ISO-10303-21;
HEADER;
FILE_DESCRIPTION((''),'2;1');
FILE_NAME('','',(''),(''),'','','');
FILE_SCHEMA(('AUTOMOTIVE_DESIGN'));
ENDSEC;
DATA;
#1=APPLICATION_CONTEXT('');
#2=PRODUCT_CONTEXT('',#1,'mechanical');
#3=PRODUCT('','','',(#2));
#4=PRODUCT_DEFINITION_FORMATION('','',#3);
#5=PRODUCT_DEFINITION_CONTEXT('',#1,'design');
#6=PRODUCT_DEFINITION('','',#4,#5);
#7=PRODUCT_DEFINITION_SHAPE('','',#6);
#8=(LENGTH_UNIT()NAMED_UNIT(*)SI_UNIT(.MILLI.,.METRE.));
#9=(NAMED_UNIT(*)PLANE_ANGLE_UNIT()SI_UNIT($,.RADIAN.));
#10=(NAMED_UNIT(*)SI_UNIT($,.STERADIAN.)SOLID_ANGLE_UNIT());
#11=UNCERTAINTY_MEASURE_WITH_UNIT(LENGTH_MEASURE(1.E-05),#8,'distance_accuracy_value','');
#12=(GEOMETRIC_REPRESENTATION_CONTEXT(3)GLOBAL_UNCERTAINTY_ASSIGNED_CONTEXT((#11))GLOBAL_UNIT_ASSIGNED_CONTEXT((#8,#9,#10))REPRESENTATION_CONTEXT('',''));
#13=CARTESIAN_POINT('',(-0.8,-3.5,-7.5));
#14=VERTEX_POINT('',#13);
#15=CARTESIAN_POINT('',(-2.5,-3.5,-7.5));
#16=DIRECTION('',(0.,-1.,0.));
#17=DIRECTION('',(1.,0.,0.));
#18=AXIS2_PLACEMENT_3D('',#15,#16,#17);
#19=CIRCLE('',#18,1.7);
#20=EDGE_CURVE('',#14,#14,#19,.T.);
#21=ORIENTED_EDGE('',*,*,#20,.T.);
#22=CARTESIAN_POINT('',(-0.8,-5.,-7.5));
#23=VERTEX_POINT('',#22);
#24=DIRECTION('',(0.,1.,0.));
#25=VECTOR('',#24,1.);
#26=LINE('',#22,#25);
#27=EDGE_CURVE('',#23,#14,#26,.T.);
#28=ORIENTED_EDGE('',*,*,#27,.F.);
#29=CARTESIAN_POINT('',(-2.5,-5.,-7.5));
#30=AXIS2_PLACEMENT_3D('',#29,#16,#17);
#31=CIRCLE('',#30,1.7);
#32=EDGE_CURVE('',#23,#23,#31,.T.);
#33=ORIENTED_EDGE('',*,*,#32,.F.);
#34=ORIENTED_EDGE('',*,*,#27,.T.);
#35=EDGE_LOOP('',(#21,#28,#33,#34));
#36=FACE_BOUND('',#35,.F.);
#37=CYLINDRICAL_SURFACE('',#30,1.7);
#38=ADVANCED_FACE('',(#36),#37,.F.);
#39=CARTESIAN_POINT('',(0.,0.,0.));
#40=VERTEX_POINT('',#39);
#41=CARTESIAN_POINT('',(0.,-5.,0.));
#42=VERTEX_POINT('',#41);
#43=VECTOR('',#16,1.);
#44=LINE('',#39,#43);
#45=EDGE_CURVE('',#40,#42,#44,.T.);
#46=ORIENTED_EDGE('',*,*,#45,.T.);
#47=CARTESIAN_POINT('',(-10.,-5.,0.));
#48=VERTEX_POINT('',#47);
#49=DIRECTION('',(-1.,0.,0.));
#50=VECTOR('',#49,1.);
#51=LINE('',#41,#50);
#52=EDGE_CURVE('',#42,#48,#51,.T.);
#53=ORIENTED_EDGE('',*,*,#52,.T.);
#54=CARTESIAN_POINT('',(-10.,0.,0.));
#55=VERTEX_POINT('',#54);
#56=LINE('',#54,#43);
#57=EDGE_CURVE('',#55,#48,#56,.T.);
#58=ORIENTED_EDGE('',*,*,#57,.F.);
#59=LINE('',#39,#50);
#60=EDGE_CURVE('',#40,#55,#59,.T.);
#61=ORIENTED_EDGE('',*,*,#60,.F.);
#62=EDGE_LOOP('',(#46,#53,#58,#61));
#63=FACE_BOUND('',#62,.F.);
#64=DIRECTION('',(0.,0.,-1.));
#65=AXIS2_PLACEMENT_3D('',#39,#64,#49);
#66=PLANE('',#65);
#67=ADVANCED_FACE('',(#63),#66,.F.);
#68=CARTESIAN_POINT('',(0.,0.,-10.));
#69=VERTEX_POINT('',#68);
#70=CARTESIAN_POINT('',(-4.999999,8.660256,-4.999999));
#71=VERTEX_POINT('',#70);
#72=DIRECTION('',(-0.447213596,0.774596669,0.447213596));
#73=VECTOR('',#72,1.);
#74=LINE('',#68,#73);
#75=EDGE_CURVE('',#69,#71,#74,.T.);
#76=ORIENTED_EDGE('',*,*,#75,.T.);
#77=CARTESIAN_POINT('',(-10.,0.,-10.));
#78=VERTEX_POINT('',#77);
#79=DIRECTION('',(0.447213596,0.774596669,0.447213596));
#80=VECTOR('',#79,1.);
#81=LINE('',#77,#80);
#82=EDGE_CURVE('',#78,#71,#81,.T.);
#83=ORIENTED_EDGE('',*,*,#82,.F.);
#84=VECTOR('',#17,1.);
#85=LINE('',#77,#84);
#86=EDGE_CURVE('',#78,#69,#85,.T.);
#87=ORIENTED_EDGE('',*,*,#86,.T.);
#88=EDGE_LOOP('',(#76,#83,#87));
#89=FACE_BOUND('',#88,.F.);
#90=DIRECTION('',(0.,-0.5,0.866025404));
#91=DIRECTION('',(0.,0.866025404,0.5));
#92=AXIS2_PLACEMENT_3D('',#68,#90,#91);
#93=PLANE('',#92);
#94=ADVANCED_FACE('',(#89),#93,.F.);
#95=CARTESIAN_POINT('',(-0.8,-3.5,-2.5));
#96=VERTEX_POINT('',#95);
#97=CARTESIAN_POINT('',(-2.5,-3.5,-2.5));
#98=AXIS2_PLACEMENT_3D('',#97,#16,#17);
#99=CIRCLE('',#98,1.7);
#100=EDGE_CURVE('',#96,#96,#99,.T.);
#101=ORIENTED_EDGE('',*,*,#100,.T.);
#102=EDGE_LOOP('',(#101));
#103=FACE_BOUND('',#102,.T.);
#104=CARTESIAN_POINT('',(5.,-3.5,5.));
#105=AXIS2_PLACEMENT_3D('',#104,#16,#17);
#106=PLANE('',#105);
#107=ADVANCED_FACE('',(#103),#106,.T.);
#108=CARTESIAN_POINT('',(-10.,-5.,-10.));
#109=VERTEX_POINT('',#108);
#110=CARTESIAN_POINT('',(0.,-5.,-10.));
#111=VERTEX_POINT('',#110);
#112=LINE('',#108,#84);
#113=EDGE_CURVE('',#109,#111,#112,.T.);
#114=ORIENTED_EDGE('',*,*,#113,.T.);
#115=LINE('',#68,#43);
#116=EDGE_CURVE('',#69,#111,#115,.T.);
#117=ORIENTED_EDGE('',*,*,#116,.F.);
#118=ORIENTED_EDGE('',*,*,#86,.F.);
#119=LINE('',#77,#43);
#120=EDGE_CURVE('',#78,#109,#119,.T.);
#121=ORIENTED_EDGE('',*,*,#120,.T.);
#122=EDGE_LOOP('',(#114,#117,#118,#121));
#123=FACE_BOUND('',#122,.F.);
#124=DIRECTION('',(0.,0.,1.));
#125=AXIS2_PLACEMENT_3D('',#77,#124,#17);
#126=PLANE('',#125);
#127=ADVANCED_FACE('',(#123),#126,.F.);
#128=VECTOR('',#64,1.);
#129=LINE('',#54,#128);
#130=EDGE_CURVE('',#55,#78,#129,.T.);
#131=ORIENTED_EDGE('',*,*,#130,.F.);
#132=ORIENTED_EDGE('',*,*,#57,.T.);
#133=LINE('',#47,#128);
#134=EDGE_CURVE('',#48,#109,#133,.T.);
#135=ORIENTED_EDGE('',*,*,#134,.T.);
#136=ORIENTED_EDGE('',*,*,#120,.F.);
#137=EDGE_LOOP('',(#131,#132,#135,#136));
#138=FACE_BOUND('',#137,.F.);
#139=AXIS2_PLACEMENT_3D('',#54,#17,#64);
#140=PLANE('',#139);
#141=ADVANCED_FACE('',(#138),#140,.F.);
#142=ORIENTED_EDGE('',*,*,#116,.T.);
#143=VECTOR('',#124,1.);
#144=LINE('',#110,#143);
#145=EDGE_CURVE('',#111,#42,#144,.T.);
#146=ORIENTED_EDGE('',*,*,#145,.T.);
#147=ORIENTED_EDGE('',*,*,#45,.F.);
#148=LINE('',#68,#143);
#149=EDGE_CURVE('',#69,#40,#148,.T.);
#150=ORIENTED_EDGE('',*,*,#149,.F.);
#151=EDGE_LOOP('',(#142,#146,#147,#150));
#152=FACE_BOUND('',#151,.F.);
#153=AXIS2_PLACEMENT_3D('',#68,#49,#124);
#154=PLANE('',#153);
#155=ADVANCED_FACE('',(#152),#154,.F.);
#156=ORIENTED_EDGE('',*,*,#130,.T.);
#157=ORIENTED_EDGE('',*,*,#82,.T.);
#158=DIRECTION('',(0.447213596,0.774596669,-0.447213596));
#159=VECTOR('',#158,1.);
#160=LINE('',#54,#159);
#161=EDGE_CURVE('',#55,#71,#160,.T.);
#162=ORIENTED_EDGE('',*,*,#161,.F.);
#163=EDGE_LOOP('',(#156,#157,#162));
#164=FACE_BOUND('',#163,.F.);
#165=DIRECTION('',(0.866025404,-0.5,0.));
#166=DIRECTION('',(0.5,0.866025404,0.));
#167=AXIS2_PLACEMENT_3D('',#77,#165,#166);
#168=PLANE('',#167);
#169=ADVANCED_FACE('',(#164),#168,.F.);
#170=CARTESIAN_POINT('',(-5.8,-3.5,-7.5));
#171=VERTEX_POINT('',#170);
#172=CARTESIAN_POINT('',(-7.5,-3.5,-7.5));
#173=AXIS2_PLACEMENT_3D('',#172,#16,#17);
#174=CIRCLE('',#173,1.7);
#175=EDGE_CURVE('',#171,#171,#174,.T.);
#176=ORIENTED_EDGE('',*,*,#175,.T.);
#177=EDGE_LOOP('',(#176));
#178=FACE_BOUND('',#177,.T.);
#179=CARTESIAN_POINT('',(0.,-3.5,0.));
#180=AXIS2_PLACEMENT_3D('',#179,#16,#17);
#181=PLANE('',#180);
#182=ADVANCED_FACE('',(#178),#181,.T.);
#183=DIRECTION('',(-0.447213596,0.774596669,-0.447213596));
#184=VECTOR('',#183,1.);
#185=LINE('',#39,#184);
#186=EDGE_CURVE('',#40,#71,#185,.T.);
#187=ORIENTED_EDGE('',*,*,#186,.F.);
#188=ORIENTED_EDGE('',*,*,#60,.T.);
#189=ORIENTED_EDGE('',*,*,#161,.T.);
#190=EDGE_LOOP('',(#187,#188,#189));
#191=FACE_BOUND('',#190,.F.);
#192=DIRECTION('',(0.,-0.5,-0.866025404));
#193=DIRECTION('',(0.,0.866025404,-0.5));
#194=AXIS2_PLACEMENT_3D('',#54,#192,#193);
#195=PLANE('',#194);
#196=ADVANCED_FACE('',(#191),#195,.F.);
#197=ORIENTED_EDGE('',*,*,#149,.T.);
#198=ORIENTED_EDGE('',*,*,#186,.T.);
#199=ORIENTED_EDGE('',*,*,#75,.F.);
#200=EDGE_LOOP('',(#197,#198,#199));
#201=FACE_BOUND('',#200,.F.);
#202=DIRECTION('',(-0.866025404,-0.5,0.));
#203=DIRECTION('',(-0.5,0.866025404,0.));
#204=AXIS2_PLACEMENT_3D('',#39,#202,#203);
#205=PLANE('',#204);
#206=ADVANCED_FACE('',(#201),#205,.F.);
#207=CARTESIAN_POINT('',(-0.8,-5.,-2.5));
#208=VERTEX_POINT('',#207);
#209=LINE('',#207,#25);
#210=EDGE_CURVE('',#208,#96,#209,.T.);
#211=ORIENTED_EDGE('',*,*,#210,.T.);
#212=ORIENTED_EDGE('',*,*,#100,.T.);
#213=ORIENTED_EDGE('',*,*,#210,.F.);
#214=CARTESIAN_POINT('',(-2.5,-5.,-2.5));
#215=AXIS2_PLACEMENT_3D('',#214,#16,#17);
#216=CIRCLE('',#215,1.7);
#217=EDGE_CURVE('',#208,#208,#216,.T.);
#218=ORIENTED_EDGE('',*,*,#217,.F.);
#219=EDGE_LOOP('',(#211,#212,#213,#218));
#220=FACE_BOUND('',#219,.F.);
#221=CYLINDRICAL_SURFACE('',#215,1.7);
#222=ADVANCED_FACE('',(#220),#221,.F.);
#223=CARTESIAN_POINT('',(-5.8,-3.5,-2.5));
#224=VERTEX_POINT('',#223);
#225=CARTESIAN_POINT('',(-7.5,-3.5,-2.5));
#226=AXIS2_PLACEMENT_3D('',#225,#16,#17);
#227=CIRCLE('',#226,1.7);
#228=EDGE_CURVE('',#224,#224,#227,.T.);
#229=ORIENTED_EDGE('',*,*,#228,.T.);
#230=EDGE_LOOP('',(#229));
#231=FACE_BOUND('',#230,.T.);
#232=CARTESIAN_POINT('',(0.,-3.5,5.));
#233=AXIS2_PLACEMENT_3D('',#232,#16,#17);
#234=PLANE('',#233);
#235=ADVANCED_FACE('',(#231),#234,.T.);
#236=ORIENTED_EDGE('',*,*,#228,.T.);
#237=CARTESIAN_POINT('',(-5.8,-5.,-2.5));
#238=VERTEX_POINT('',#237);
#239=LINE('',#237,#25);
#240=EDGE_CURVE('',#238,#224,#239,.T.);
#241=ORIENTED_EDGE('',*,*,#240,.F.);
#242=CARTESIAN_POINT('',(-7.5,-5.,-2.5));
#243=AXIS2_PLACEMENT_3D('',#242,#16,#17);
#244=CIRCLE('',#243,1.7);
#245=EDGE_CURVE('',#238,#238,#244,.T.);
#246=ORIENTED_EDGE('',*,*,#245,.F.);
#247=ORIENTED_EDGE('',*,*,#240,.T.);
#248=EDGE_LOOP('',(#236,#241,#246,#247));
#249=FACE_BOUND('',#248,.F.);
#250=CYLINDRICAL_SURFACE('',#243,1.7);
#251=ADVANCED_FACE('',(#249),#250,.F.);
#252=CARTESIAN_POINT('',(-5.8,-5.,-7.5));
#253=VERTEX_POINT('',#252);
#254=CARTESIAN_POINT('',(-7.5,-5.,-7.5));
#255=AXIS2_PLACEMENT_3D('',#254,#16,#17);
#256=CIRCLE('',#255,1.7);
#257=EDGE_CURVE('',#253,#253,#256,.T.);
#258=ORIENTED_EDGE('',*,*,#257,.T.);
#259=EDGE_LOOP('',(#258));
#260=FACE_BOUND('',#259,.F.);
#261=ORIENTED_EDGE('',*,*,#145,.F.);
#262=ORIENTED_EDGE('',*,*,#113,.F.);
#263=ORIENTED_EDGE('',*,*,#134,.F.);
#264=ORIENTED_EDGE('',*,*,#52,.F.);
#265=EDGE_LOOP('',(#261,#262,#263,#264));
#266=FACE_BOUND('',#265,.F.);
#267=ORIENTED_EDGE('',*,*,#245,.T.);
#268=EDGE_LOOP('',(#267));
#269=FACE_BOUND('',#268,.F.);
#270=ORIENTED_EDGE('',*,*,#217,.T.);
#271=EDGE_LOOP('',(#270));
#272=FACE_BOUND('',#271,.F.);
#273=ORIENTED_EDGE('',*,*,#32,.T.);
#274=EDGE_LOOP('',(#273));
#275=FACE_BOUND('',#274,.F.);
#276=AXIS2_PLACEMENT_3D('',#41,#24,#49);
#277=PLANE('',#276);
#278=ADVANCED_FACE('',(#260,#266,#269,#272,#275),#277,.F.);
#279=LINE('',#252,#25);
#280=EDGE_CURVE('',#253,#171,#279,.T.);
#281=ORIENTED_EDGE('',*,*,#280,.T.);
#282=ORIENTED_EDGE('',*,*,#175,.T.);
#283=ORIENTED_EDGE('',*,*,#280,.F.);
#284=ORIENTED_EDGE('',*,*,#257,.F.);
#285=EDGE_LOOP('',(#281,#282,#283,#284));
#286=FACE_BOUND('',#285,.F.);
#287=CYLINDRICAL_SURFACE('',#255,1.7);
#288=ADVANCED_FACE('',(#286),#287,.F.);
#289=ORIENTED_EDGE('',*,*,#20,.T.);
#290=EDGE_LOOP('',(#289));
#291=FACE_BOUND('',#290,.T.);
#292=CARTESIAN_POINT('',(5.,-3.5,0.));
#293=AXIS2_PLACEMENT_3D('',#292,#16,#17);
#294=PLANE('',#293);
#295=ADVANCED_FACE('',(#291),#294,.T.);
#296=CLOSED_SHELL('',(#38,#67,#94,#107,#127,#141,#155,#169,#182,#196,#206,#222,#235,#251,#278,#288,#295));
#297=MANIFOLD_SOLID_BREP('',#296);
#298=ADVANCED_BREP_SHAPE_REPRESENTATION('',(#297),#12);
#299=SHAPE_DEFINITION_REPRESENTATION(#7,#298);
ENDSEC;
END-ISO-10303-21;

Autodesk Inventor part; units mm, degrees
ref_plane "YZ Plane" through (0, 0, 0) normal (1, 0, 0) x (0, 1, 0)
ref_plane "XZ Plane" through (0, 0, 0) normal (0, 1, 0) x (-1, 0, 0)
ref_plane "XY Plane" through (0, 0, 0) normal (0, 0, 1) x (1, 0, 0)
sketch "草圖1" plane through (0, 0, 0) normal (0, 1, 0) x (-1, 0, 0)
  line L0 (0, 0) -> (10, 0)
  line L1 (10, 0) -> (10, -10)
  line L2 (10, -10) -> (0, -10)
  line L3 (0, -10) -> (0, 0)
  circle A0 centre (7.5, -2.5) radius 1.7
  circle A1 centre (7.5, -7.5) radius 1.7
  circle A2 centre (2.5, -2.5) radius 1.7
  circle A3 centre (2.5, -7.5) radius 1.7
  dimension "d0" = 10
  dimension "d1" = 10
  dimension "d2" = 3.4
  dimension "d3" = 2.5
  dimension "d4" = 2.5
  dimension "d7" = 5
  dimension "d10" = 5
extrude "擠出1" add sketch "草圖1" against normal blind 5 contours L0 L1 L2 L3 | A0 | A1 | A2 | A3
sketch "草圖1 outline for 擠出2" plane through (0, 0, 0) normal (0, 1, 0) x (-1, 0, 0)
  line L0 (0, 0) -> (0, -10)
  line L1 (10, 0) -> (0, 0)
  line L2 (10, -10) -> (10, 0)
  line L3 (0, -10) -> (10, -10)
extrude "擠出2" add sketch "草圖1 outline for 擠出2" along normal blind 10 draft -30
sketch "草圖2" plane through (0, -5, 0) normal (0, -1, 0) x (1, 0, 0)
  circle A0 centre (-7.5, -7.5) radius 1.7 projected
  line L0 (-10, -10) -> (0, -10) projected
  line L1 (0, -10) -> (0, 0) projected
  line L2 (0, 0) -> (-10, 0) projected
  line L3 (-10, 0) -> (-10, -10) projected
extrude "擠出3" cut sketch "草圖2" against normal blind 1.5 contours A0
pattern_linear "矩形陣列1" count 2 spacing 5 along (0, 0, 1) count 2 spacing 5 along (1, 0, 0) of "擠出3"
properties part number "110033226_ipt_35_中心城堡圍牆頂部_MIR"
